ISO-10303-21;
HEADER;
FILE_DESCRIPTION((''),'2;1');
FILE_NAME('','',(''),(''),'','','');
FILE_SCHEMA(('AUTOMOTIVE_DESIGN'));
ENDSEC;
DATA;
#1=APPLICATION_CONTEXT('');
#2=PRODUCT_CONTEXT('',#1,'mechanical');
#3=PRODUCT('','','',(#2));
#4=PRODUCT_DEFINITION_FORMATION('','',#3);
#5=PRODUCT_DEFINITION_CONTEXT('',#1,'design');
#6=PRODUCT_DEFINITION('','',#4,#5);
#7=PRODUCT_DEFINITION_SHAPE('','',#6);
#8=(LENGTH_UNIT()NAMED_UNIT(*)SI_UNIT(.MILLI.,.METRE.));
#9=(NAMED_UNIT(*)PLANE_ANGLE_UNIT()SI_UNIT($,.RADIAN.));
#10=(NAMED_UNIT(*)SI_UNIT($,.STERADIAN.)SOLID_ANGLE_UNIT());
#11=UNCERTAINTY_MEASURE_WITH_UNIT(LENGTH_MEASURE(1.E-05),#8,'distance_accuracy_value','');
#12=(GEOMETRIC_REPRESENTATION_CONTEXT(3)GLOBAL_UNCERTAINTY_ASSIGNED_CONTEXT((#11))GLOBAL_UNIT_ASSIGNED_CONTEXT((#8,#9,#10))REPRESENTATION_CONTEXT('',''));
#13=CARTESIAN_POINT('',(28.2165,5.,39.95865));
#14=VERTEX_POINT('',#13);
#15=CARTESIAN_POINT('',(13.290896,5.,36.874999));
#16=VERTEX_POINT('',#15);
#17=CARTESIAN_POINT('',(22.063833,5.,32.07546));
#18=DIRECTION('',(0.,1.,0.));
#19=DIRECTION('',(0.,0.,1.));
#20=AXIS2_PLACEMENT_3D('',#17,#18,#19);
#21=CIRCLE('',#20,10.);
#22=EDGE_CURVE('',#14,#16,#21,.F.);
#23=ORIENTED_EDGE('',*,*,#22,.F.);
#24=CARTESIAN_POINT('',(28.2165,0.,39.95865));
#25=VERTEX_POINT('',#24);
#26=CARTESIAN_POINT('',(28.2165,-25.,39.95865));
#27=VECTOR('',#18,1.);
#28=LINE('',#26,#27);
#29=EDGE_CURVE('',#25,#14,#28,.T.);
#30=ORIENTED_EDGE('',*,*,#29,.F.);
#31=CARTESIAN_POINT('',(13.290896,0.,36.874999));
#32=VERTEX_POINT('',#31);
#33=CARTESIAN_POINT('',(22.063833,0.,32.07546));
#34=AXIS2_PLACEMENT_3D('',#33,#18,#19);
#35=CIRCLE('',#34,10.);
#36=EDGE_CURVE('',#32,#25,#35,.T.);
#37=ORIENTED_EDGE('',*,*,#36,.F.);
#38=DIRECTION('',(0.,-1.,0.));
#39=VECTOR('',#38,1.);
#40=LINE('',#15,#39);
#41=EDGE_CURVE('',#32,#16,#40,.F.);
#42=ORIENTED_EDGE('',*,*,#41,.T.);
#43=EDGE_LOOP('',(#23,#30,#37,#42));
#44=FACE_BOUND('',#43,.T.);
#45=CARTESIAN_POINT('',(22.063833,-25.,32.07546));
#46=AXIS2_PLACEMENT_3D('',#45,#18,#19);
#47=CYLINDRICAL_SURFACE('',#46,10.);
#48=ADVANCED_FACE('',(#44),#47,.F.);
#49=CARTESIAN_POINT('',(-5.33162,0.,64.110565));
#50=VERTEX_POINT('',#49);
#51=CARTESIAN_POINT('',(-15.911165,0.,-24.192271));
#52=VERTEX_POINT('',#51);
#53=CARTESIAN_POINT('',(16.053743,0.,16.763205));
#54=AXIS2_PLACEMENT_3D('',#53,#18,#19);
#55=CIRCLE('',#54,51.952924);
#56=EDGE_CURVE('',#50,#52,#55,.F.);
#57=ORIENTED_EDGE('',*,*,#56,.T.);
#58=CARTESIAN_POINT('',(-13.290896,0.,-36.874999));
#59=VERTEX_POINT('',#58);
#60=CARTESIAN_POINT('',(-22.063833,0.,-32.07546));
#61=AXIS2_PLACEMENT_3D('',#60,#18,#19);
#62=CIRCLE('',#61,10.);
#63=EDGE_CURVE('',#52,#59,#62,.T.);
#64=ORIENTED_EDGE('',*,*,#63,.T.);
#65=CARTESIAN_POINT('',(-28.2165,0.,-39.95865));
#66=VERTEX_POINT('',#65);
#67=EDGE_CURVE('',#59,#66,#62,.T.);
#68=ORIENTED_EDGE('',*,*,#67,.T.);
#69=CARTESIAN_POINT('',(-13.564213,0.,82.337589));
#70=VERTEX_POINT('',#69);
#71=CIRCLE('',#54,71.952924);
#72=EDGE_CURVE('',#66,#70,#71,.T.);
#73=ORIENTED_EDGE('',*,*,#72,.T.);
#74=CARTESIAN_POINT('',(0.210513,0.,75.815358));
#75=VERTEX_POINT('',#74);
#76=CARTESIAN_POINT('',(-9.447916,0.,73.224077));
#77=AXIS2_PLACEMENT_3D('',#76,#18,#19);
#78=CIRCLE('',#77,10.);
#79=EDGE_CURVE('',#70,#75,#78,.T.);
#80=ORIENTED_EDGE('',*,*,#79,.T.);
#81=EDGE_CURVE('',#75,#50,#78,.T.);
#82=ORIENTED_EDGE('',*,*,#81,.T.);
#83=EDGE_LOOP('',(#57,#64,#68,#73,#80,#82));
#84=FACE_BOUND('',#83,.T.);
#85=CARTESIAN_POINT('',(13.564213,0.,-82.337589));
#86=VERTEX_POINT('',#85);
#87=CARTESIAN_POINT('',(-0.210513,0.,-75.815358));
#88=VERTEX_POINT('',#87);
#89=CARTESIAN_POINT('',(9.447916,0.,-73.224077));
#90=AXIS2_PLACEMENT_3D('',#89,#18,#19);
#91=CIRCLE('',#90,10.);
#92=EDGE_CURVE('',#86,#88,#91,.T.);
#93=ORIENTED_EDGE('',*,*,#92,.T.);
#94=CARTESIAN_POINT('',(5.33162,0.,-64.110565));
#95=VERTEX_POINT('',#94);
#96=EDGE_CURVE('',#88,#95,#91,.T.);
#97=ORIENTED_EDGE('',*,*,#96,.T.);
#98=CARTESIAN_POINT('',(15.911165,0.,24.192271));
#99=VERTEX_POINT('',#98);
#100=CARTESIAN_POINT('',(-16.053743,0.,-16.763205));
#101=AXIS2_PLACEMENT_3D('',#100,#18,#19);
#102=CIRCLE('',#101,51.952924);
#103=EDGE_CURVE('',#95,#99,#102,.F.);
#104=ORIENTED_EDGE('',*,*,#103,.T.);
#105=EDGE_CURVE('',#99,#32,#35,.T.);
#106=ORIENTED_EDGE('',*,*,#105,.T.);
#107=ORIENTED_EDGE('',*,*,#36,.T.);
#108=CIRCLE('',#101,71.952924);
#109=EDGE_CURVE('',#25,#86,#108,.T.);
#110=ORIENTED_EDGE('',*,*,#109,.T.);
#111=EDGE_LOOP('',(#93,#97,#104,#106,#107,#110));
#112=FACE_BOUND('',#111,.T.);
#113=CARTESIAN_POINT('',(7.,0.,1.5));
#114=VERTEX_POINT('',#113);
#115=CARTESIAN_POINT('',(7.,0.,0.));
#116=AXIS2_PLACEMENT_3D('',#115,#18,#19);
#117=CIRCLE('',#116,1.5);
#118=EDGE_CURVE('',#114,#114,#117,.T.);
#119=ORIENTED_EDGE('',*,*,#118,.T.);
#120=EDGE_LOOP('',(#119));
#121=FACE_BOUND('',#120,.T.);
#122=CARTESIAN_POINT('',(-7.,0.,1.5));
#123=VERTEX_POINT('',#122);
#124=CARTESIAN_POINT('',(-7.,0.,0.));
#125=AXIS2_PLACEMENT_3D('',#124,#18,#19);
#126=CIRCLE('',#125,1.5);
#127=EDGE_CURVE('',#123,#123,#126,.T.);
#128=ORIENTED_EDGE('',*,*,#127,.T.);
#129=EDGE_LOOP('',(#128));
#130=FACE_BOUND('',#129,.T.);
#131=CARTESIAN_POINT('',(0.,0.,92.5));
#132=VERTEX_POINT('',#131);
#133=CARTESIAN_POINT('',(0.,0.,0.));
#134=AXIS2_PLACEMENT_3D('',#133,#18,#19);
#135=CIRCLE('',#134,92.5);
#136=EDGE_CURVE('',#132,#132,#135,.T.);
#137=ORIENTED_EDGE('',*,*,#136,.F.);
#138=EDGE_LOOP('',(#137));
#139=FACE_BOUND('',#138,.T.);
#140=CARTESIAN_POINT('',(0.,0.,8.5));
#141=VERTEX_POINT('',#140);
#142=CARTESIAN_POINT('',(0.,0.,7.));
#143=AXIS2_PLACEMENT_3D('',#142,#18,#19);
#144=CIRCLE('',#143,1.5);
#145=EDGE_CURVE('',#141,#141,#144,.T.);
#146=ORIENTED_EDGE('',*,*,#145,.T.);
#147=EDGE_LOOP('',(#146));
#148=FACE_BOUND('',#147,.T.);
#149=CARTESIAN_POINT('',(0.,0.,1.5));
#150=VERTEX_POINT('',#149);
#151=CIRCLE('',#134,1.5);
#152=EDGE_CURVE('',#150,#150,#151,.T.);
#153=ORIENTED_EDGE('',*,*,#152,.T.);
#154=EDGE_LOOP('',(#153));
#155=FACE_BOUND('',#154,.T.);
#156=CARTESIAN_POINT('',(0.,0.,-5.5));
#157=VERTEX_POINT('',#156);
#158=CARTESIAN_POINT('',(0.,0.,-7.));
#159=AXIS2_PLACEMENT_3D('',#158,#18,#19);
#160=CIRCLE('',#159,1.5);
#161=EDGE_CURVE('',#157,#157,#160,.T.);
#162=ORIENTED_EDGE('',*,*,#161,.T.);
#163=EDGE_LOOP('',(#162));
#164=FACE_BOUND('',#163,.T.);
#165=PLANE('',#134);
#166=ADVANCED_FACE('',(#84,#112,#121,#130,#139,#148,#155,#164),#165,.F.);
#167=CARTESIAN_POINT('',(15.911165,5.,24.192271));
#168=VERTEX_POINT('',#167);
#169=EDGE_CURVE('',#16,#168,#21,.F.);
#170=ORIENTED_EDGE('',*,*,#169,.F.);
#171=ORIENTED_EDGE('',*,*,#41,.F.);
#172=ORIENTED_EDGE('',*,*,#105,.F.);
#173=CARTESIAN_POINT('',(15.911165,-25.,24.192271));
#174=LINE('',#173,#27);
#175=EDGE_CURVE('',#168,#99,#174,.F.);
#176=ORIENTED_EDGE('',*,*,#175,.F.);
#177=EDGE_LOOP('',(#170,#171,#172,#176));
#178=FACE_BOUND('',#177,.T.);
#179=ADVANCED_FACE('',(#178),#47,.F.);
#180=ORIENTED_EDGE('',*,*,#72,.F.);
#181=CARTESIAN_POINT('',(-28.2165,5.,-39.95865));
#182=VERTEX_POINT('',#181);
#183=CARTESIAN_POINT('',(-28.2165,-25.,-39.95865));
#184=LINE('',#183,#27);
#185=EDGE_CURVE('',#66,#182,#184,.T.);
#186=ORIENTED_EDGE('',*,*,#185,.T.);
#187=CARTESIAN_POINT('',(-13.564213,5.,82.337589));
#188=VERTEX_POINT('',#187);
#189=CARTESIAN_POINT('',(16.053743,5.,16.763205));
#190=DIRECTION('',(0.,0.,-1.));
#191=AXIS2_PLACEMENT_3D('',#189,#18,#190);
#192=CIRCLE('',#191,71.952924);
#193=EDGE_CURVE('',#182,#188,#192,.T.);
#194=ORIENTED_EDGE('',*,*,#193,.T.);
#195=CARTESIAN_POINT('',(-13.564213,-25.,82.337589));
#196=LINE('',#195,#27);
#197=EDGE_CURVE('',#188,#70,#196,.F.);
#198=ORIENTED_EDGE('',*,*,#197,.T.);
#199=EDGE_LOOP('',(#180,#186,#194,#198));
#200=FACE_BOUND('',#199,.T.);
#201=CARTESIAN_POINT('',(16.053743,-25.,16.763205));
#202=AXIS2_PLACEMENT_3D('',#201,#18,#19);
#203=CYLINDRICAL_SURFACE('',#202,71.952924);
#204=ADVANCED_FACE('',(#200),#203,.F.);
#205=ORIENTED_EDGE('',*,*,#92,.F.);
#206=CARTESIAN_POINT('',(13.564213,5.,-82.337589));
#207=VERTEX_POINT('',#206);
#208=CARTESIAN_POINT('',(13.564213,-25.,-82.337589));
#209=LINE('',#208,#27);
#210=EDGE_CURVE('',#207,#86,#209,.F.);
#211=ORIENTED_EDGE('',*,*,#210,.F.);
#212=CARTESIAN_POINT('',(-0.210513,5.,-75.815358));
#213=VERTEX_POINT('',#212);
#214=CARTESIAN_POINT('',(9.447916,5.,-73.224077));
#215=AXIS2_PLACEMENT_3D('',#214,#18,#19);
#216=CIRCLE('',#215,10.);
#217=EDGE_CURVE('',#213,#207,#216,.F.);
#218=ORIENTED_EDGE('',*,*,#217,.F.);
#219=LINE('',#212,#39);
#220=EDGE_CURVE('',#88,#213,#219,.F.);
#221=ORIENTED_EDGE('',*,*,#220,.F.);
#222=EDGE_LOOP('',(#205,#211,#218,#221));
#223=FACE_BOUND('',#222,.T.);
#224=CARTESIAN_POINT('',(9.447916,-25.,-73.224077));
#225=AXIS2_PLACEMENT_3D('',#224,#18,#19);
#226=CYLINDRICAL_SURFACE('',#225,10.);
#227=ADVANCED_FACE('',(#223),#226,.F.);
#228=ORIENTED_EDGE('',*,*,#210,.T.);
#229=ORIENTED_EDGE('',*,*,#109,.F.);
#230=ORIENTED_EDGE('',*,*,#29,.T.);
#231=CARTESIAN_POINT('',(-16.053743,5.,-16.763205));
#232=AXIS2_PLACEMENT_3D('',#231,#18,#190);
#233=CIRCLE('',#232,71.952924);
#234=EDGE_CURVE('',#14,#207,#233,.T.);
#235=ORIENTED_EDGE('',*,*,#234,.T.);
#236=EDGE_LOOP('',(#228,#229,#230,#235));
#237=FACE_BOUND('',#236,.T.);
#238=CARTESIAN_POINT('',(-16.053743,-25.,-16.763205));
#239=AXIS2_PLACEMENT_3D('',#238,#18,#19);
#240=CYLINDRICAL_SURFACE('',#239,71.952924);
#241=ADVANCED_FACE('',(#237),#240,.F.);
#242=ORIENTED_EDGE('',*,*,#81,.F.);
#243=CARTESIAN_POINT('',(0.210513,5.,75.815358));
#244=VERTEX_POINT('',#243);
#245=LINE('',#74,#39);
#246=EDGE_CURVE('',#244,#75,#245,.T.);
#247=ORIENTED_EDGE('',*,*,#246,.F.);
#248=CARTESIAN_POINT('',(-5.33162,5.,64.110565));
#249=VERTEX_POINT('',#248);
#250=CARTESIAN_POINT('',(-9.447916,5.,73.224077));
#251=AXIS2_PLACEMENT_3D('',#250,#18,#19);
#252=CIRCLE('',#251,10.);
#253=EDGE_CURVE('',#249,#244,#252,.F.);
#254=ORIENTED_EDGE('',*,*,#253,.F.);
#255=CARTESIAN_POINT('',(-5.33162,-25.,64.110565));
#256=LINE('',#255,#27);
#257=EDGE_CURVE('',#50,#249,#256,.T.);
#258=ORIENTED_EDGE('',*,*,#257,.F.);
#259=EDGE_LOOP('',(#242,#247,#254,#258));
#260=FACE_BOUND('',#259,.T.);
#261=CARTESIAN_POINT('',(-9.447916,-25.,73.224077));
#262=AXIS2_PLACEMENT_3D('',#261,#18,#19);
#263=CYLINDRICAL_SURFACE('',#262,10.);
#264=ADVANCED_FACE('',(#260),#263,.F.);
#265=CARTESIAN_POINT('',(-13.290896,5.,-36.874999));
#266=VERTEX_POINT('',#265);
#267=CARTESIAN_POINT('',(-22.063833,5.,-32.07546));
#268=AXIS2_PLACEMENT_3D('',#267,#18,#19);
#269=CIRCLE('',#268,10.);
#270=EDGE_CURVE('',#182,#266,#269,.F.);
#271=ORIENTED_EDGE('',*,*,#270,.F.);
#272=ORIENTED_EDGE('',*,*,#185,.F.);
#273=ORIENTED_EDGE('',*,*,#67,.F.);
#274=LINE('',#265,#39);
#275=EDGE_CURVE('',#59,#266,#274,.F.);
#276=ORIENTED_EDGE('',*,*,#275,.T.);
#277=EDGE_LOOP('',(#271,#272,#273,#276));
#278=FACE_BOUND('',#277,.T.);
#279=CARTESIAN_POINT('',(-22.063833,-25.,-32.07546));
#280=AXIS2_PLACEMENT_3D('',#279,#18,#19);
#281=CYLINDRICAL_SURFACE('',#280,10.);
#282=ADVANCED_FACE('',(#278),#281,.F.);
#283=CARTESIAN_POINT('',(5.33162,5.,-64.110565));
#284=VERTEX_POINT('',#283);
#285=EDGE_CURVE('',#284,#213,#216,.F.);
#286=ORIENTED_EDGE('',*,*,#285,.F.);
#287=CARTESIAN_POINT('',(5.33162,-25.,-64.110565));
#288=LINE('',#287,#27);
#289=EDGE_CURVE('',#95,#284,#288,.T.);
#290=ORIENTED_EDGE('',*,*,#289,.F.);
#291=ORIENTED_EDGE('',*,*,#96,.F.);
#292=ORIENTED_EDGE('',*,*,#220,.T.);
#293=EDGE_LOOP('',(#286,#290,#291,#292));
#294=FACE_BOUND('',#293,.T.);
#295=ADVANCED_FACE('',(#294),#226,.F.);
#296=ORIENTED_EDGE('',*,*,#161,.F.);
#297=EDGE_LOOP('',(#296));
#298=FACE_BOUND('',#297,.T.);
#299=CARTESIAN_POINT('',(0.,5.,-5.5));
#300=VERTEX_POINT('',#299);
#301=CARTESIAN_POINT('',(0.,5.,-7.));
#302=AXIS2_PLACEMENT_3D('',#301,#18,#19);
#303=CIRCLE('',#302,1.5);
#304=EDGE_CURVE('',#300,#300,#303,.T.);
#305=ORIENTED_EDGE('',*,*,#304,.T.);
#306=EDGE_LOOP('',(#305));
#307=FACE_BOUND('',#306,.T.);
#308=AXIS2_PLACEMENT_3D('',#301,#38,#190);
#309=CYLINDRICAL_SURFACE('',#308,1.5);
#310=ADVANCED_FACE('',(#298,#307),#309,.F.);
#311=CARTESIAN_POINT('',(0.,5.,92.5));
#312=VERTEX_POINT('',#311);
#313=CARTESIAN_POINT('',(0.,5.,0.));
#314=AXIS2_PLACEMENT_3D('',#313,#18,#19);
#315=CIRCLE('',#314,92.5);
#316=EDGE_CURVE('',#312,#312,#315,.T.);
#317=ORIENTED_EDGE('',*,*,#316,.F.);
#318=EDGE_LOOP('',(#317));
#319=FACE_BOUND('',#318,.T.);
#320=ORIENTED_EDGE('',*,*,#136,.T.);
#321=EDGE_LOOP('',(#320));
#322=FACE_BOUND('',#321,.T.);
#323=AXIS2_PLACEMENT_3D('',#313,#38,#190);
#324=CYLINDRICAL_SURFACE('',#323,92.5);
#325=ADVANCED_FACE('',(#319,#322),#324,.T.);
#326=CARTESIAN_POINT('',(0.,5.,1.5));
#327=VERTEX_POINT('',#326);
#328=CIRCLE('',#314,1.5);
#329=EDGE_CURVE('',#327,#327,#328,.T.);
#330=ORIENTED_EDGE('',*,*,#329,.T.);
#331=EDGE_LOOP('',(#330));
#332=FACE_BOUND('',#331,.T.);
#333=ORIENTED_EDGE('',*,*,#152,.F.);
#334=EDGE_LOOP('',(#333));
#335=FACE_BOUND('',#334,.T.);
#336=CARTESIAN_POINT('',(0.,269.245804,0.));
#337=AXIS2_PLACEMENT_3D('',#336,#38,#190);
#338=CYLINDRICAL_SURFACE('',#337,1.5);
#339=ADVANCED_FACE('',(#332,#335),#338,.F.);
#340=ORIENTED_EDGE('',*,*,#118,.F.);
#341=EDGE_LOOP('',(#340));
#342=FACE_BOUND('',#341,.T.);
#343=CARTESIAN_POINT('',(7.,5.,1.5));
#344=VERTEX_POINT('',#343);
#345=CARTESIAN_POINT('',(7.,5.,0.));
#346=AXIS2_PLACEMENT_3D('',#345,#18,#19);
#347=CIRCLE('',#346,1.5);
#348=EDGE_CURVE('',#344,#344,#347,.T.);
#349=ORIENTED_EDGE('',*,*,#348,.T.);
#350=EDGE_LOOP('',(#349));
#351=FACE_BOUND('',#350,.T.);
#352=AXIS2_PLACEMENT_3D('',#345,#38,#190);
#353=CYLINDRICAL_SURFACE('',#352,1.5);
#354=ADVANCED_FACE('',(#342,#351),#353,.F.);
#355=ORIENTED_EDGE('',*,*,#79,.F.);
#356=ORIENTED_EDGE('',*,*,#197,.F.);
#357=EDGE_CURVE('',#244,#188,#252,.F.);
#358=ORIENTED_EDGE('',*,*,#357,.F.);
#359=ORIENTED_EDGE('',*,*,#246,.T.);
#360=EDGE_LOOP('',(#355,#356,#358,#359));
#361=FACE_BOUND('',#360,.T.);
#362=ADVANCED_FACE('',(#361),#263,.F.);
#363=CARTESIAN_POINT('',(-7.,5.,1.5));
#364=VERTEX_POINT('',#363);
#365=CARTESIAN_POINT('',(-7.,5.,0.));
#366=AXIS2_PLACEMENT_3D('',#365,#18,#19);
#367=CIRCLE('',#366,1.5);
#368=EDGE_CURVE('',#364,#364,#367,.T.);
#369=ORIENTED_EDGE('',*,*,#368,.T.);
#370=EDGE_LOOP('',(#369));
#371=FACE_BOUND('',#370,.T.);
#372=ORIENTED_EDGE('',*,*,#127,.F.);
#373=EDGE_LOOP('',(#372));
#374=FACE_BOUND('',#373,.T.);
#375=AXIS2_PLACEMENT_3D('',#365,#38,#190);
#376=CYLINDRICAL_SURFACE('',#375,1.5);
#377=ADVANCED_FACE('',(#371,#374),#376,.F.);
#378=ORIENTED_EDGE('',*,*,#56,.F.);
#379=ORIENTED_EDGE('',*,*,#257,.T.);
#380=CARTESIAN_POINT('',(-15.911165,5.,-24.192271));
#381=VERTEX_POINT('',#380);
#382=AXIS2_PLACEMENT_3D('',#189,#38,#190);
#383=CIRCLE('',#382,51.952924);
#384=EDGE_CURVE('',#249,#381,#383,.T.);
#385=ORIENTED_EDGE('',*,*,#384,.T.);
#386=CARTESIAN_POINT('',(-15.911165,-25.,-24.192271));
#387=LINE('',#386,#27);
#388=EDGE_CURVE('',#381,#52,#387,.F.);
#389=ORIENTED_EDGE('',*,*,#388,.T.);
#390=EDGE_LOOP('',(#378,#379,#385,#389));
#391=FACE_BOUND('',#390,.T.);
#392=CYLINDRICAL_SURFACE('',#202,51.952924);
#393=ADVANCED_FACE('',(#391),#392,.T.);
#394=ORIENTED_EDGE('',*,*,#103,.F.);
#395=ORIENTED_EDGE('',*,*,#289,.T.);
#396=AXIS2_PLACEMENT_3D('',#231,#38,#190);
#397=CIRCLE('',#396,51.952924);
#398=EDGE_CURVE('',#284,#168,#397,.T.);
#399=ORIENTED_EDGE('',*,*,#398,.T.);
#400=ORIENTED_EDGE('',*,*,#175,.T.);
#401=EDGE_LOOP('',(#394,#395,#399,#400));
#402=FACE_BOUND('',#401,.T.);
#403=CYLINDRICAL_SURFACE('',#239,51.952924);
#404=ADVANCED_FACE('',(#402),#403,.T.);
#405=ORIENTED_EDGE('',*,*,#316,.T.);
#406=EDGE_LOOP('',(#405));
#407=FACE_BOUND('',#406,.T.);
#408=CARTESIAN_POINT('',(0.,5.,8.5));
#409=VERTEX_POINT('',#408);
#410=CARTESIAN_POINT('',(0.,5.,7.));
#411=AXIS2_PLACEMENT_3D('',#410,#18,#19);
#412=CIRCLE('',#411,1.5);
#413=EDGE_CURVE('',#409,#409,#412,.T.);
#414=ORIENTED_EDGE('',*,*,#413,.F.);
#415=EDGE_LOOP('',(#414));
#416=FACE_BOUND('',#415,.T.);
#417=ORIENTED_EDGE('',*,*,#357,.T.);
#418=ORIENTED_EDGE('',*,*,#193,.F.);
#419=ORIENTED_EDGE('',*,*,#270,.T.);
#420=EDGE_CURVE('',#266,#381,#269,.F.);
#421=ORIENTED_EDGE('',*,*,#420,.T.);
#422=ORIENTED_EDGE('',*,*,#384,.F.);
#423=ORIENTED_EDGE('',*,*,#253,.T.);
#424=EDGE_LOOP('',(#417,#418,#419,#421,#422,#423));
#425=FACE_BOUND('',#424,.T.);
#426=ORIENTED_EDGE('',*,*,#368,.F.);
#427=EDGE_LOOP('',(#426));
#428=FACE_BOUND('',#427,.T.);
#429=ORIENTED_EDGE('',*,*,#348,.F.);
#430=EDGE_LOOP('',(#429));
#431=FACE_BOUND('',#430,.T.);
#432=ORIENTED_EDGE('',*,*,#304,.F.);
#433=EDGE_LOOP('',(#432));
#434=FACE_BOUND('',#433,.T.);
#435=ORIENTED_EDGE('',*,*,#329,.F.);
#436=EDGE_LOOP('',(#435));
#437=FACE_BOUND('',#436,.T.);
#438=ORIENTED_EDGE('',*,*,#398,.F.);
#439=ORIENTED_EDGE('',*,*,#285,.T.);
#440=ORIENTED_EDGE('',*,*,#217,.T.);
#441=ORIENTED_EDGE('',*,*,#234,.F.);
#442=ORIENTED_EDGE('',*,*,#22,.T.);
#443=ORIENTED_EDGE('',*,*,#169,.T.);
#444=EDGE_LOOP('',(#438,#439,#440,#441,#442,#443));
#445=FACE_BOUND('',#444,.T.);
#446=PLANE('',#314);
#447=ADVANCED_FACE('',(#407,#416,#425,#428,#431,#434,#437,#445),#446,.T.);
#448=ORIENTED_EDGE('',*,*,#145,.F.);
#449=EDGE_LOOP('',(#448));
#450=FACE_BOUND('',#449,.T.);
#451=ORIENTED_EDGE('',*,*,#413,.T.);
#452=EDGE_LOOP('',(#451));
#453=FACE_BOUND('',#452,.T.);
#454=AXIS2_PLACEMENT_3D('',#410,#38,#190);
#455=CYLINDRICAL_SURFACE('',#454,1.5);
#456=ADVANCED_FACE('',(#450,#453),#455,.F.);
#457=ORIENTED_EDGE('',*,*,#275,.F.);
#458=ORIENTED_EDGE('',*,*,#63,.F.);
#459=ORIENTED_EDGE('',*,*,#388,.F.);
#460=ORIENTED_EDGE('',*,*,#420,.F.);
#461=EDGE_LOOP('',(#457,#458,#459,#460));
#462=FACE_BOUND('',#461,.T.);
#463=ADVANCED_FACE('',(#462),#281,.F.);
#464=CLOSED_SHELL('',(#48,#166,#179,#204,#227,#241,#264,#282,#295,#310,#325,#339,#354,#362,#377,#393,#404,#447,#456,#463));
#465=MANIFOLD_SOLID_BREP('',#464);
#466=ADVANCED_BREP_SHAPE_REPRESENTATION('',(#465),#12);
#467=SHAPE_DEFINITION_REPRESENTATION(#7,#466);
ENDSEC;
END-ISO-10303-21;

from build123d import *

# Parameters (mm, degrees)
SKETCH_1_R             = 92.5
SKETCH_1_R_2           = 1.5
EXTRUDE_1_DEPTH        = 5
CUT_EXTRUDE_1_DEPTH    = 30
FILLET_3_R             = 10
SKETCH_1_3_R           = 1.5
EXTRUDE_2_DEPTH        = 5
SKETCH_1_5_OUTSIDE_W   = 239.336
SKETCH_1_5_OUTSIDE_H   = 239.336
SKETCH_1_5_OUTSIDE_R   = 92.5
SKETCH_1_5_OUTSIDE_R_2 = 1.5
CUT_EXTRUDE_2_DEPTH    = 5


with BuildPart() as part:
    # 草图1 → 凸台-拉伸1 (new body)
    with BuildSketch(Plane(origin=(0, 0, 0), x_dir=(1, 0, 0), z_dir=(0, 1, 0))):
        with Locations(Location((0, 0, 0), (0, 0, 270))):
            Circle(SKETCH_1_R)
        with Locations(Location((0, 0, 0), (0, 0, 270))):
            Circle(SKETCH_1_R_2, mode=Mode.SUBTRACT)
        with Locations(Location((0, 7, 0), (0, 0, 270))):
            Circle(SKETCH_1_R_2, mode=Mode.SUBTRACT)
        with Locations(Location((7, 0, 0), (0, 0, 270))):
            Circle(SKETCH_1_R_2, mode=Mode.SUBTRACT)
        with Locations(Location((0, -7, 0), (0, 0, 270))):
            Circle(SKETCH_1_R_2, mode=Mode.SUBTRACT)
        with Locations(Location((-7, 0, 0), (0, 0, 270))):
            Circle(SKETCH_1_R_2, mode=Mode.SUBTRACT)
    extrude(amount=EXTRUDE_1_DEPTH)

    # 草图2 → 切除-拉伸1 (cut)
    with BuildSketch(Plane(origin=(0, 5, 0), x_dir=(1, 0, 0), z_dir=(0, 1, 0))):
        with BuildLine():
            Line((2.591280941, 86.258429639), (-2.591280941, 66.941570361))
            ThreePointArc((-2.591280941, 66.941570361), (35.5302713, 22.943474897), (8.881266501, -28.814767857))
            Line((8.881266501, -28.814767857), (18.480344966, -46.360641806))
            ThreePointArc((18.480344966, -46.360641806), (55.388254532, 25.322655836), (2.591280941, 86.258429639))
        make_face()
        with BuildLine():
            Line((-8.881266501, 28.814767857), (-18.480344966, 46.360641806))
            ThreePointArc((-18.480344966, 46.360641806), (-55.388254532, -25.322655836), (-2.591280941, -86.258429639))
            Line((-2.591280941, -86.258429639), (2.591280941, -66.941570361))
            ThreePointArc((2.591280941, -66.941570361), (-35.5302713, -22.943474897), (-8.881266501, 28.814767857))
        make_face()
    extrude(amount=-CUT_EXTRUDE_1_DEPTH, mode=Mode.SUBTRACT)

    # 圆角3
    fillet_3_edges = [part.edges().sort_by_distance(p)[0] for p in [
        (-18.480344966, 2.5, -46.360641806),
        (-8.881266501, 2.5, -28.814767857),
        (-2.591280941, 2.5, 86.258429639),
        (2.591280941, 2.5, 66.941570361),
        (18.480344966, 2.5, 46.360641806),
        (8.881266501, 2.5, 28.814767857),
        (-2.591280941, 2.5, -66.941570361),
        (2.591280941, 2.5, -86.258429639),
    ]]
    fillet(fillet_3_edges, radius=FILLET_3_R - 0.0001)  # a hair under: the kernel refuses the full size

    # 草图1<3> → 凸台-拉伸2 (add)
    with BuildSketch(Plane(origin=(0, 0, 0), x_dir=(1, 0, 0), z_dir=(0, 1, 0))):
        Circle(SKETCH_1_3_R)
    extrude(amount=EXTRUDE_2_DEPTH)

    # 草图1<5> outside → 切除-拉伸2 (cut)
    # profile 1 of 6: a face of its own
    with BuildSketch(Plane(origin=(0, 0, 0), x_dir=(1, 0, 0), z_dir=(0, 1, 0))):
        Rectangle(SKETCH_1_5_OUTSIDE_W, SKETCH_1_5_OUTSIDE_H)
        with Locations(Location((0, 0, 0), (0, 0, 270))):
            Circle(SKETCH_1_5_OUTSIDE_R, mode=Mode.SUBTRACT)
    # profile 2 of 6: a face of its own
    with BuildSketch(Plane(origin=(0, 0, 0), x_dir=(1, 0, 0), z_dir=(0, 1, 0))):
        with Locations(Location((0, 0, 0), (0, 0, 270))):
            Circle(SKETCH_1_5_OUTSIDE_R_2)
    # profile 3 of 6: a face of its own
    with BuildSketch(Plane(origin=(0, 0, 0), x_dir=(1, 0, 0), z_dir=(0, 1, 0))):
        with Locations(Location((0, 7, 0), (0, 0, 270))):
            Circle(SKETCH_1_5_OUTSIDE_R_2)
    # profile 4 of 6: a face of its own
    with BuildSketch(Plane(origin=(0, 0, 0), x_dir=(1, 0, 0), z_dir=(0, 1, 0))):
        with Locations(Location((7, 0, 0), (0, 0, 270))):
            Circle(SKETCH_1_5_OUTSIDE_R_2)
    # profile 5 of 6: a face of its own
    with BuildSketch(Plane(origin=(0, 0, 0), x_dir=(1, 0, 0), z_dir=(0, 1, 0))):
        with Locations(Location((0, -7, 0), (0, 0, 270))):
            Circle(SKETCH_1_5_OUTSIDE_R_2)
    # profile 6 of 6: a face of its own
    with BuildSketch(Plane(origin=(0, 0, 0), x_dir=(1, 0, 0), z_dir=(0, 1, 0))):
        with Locations(Location((-7, 0, 0), (0, 0, 270))):
            Circle(SKETCH_1_5_OUTSIDE_R_2)
    extrude(amount=CUT_EXTRUDE_2_DEPTH, mode=Mode.SUBTRACT)


solid = part.part
